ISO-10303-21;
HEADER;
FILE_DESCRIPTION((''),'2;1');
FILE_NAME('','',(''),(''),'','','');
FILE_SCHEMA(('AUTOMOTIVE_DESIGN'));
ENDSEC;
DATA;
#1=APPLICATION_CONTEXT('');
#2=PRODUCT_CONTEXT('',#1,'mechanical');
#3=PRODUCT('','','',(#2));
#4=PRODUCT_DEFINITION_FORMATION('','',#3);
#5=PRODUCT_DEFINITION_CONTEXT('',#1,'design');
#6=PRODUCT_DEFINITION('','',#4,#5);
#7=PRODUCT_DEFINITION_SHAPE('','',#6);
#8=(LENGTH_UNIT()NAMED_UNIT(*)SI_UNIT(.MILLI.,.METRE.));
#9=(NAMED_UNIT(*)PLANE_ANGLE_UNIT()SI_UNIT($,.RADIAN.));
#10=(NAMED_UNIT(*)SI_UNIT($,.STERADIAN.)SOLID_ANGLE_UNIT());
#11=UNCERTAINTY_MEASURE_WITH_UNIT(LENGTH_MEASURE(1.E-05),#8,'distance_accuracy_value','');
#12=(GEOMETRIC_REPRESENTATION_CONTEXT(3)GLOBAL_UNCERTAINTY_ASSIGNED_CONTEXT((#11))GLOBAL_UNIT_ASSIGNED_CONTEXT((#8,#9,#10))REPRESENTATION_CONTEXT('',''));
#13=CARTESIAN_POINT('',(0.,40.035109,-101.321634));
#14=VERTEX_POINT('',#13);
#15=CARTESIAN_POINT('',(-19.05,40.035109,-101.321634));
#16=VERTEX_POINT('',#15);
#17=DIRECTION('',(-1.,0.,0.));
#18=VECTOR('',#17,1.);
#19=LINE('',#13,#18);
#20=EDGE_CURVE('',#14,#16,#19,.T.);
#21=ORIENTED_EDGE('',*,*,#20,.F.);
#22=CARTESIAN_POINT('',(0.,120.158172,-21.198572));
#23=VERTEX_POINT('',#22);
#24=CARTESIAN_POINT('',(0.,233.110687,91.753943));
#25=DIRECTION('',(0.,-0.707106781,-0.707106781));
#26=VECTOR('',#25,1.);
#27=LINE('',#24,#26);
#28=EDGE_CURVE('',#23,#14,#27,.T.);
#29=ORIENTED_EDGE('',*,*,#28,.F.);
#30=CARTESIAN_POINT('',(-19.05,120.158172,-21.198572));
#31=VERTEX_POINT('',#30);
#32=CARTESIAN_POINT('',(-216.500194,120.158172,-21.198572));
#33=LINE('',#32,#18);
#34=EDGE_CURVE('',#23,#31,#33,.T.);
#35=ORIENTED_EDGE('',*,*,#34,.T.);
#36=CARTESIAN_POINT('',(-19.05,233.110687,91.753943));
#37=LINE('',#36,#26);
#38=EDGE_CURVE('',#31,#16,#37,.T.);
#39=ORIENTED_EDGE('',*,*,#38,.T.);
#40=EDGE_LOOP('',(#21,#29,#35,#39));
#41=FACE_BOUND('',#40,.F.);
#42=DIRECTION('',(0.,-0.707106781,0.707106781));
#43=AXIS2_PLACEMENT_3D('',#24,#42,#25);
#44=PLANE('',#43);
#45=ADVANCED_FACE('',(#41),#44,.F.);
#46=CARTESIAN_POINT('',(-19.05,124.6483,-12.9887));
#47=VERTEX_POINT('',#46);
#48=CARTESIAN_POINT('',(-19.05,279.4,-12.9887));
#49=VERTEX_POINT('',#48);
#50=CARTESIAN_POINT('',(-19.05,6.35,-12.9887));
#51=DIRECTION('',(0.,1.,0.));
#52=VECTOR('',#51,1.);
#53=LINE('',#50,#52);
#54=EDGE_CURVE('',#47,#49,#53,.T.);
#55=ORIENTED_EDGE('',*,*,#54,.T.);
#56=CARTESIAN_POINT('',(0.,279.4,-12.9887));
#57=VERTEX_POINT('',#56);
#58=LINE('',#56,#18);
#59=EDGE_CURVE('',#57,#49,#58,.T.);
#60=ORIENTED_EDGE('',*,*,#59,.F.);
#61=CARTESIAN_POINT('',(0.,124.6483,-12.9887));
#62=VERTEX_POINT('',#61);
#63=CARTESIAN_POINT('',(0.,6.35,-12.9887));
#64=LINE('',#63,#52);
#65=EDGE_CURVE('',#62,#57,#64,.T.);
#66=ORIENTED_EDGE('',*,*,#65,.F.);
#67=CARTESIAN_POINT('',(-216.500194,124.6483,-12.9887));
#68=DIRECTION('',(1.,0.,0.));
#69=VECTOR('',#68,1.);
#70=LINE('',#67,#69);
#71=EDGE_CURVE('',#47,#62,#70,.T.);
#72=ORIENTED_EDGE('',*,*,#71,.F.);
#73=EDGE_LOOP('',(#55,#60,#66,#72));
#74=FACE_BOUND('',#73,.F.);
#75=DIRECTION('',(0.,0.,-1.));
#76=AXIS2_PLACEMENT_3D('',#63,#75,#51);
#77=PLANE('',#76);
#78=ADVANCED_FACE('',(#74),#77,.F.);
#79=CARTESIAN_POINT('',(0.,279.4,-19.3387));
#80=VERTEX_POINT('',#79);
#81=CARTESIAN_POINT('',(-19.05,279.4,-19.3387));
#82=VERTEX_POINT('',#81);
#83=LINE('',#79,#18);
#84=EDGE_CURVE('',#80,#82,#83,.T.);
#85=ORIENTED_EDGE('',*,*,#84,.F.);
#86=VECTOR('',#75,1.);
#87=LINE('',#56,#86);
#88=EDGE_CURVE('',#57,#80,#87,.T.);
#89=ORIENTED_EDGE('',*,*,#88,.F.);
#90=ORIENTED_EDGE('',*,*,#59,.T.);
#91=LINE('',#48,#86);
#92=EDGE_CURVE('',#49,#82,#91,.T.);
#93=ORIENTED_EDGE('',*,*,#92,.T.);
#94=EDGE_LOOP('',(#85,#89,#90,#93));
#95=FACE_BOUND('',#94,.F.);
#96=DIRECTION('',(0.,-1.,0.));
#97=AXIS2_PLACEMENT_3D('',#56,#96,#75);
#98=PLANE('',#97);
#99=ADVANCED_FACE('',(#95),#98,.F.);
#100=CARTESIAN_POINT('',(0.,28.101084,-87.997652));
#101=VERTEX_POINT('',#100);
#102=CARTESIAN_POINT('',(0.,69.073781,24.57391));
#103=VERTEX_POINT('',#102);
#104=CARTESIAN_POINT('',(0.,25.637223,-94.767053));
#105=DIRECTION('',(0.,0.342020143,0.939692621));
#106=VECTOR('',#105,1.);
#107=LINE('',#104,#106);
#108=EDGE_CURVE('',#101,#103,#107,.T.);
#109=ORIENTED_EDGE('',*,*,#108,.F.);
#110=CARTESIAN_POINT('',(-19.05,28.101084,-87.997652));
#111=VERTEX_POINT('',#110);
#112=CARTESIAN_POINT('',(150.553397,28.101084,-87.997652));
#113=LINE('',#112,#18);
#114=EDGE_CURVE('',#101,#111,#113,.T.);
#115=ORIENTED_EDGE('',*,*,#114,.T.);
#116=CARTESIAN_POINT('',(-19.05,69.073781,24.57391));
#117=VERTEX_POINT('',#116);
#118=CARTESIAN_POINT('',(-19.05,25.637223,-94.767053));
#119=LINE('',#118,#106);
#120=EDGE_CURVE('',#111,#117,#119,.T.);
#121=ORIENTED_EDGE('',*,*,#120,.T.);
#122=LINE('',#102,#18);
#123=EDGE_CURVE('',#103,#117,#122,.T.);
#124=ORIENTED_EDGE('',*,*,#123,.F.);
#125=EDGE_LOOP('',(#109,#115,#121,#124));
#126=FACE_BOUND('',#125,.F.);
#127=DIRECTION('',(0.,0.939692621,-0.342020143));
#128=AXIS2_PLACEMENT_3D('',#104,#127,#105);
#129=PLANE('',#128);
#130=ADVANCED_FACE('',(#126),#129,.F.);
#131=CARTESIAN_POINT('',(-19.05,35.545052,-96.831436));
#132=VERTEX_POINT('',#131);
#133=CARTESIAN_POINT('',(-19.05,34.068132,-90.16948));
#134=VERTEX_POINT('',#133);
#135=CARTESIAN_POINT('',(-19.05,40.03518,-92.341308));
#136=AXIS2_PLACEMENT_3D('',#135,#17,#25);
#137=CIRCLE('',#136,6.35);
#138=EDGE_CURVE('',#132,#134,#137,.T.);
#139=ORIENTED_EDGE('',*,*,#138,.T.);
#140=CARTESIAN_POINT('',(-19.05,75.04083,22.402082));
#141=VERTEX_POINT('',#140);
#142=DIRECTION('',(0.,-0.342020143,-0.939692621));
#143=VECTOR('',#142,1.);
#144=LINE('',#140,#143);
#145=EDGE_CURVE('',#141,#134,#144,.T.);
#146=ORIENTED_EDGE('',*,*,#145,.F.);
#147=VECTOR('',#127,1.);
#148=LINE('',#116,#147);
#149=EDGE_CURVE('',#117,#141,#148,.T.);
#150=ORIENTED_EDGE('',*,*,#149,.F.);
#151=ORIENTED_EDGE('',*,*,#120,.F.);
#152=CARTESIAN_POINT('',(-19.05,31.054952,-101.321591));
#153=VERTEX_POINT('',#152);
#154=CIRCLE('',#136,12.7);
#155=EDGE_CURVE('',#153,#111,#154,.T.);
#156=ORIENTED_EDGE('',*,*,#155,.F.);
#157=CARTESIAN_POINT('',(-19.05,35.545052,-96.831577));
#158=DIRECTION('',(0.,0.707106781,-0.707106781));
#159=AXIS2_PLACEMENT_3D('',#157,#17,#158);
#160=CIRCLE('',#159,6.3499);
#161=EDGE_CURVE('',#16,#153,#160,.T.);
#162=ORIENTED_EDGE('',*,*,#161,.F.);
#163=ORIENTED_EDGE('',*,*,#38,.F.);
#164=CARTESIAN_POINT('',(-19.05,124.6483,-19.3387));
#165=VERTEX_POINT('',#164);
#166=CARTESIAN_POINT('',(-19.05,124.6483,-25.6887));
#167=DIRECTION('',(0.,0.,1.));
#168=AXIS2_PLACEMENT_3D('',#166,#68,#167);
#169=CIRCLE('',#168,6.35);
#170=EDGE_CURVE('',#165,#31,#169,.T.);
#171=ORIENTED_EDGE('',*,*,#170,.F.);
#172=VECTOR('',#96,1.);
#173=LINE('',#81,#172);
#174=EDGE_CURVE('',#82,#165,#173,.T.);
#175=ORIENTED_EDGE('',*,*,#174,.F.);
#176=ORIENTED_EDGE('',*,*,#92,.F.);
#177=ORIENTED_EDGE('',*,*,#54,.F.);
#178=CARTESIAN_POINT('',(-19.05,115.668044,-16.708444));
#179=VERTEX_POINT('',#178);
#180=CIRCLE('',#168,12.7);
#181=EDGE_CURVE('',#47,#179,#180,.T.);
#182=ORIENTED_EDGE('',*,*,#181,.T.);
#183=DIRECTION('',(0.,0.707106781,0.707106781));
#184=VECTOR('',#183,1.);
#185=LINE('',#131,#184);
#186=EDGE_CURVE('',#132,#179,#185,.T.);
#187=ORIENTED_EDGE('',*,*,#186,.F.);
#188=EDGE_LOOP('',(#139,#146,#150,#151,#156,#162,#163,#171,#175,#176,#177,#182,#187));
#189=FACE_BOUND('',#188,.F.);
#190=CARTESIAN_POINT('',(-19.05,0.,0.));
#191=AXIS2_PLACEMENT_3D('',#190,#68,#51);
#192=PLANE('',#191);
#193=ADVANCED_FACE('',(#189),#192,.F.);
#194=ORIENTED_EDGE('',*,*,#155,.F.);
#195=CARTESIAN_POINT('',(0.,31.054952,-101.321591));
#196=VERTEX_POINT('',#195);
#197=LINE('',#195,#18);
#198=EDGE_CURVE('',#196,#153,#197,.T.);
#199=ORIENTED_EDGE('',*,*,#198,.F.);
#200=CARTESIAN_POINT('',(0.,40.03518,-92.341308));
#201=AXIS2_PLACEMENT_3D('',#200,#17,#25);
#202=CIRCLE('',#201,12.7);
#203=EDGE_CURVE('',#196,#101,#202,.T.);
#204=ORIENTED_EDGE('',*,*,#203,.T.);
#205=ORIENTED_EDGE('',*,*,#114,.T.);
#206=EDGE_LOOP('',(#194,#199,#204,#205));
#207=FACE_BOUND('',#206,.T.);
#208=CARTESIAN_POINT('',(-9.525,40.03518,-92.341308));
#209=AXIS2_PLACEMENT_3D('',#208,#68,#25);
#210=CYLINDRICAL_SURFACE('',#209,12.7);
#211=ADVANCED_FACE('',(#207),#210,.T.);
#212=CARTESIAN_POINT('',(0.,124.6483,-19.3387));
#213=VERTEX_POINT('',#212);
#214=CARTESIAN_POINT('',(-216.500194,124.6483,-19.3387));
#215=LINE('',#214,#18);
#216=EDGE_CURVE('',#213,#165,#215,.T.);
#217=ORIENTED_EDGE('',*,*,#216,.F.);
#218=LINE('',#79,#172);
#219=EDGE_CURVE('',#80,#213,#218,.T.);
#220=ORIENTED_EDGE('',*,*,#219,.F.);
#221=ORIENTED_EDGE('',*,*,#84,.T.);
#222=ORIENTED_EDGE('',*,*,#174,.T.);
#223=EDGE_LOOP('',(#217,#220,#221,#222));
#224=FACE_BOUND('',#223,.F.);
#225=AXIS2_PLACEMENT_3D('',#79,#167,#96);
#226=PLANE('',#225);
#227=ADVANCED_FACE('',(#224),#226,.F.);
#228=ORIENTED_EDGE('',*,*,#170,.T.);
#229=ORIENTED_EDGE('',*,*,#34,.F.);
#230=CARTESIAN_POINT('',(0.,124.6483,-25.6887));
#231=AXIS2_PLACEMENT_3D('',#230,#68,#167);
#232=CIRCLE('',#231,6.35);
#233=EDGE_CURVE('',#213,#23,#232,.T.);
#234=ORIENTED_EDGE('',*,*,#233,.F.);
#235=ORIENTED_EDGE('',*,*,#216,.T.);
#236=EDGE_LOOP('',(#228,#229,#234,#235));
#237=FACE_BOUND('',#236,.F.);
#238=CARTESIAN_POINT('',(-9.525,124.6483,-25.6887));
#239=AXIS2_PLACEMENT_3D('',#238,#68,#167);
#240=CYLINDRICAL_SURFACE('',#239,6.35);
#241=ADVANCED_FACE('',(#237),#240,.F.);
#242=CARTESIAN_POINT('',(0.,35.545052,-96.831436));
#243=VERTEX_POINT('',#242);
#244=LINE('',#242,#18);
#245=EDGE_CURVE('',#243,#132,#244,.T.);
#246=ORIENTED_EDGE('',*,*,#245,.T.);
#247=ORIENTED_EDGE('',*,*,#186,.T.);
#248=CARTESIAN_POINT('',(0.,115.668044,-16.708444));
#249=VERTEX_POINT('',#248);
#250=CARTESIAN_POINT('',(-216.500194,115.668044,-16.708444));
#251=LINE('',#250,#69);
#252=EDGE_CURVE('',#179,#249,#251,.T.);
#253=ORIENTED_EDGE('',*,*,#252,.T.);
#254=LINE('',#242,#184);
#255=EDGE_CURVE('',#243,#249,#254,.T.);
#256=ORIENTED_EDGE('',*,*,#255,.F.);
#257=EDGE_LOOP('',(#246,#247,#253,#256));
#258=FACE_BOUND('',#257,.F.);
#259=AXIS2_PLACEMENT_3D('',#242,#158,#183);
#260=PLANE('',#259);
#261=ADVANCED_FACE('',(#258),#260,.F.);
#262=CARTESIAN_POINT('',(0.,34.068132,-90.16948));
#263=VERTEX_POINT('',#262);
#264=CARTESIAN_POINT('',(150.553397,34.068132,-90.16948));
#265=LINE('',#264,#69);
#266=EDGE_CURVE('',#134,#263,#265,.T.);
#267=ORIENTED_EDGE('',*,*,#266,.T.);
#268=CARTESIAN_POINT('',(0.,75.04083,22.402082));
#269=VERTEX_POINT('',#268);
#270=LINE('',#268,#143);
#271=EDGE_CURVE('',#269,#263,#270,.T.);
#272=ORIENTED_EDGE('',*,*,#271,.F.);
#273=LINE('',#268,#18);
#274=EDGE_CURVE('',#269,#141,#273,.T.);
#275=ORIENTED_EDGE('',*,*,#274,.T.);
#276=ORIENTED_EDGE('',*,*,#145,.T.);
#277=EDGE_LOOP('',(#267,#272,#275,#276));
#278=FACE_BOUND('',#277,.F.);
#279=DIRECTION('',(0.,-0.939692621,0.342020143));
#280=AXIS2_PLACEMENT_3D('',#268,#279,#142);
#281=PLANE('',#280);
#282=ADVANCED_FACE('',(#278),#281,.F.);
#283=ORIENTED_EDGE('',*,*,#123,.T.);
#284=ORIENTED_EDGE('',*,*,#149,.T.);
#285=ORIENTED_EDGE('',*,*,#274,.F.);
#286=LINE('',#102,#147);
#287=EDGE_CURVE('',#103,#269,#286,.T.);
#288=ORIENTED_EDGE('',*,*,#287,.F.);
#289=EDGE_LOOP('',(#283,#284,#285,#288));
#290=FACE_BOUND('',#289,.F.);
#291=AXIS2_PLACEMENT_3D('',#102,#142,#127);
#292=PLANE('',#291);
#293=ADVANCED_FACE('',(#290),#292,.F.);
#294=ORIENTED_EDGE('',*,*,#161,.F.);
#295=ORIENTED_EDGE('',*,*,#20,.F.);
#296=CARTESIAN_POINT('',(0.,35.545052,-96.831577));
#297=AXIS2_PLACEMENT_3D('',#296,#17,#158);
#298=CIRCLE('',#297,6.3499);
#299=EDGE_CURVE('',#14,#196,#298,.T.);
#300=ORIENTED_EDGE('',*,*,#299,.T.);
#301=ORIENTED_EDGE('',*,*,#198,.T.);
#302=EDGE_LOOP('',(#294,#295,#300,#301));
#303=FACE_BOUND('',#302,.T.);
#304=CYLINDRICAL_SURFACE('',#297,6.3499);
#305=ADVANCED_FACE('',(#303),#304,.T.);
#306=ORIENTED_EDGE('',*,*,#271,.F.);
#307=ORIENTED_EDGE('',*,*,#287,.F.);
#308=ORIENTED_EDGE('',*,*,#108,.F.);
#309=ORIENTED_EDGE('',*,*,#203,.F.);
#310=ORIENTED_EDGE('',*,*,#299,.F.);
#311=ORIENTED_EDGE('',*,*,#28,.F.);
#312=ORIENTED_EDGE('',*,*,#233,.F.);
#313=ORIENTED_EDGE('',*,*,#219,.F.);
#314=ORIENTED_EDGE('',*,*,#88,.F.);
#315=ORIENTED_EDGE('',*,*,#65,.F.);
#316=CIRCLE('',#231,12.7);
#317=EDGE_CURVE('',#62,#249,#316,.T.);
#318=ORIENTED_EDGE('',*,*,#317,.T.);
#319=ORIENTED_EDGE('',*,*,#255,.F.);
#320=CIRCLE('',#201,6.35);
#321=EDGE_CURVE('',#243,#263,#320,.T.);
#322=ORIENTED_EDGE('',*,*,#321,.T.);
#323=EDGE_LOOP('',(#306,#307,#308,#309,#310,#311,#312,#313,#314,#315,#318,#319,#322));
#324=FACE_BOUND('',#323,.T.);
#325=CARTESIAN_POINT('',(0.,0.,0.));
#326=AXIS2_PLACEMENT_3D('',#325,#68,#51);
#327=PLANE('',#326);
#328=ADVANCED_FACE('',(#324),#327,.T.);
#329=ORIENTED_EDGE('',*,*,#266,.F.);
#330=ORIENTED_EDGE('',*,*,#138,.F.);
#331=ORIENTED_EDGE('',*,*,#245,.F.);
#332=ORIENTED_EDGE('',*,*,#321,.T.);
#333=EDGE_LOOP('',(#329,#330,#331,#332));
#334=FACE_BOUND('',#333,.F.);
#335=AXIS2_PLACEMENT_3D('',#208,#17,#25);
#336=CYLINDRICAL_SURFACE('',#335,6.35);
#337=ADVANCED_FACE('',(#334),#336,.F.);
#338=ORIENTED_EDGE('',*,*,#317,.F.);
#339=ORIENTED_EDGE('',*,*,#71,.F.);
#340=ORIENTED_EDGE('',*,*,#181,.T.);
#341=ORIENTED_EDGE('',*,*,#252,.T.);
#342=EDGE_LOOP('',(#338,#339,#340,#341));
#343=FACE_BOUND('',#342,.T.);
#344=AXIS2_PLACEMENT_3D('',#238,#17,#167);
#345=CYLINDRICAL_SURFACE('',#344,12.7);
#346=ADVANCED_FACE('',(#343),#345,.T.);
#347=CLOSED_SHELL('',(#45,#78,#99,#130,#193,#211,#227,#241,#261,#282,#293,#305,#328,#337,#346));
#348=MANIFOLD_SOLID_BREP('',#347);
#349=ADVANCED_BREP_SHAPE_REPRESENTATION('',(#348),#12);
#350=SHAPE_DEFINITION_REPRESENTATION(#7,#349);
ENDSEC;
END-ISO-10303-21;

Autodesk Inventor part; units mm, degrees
ref_plane "YZ Plane" through (0, 0, 0) normal (1, 0, 0) x (0, 1, 0)
ref_plane "XZ Plane" through (0, 0, 0) normal (0, 1, 0) x (-1, 0, 0)
ref_plane "XY Plane" through (0, 0, 0) normal (0, 0, 1) x (1, 0, 0)
sketch "Sketch1" plane through (0, 0, 0) normal (1, 0, 0) x (0, 1, 0)
  line L0 (6.35, -12.9887) -> (279.4, -12.9887)
  line L1 (279.4, -12.9887) -> (279.4, -19.3387)
  line L2 (279.4, -19.3387) -> (0, -19.3387)
  line L3 (0, -19.3387) -> (0, -12.9887)
  line L4 (0, -12.9887) -> (0, 114.0113)
  line L5 (0, 114.0113) -> (6.35, 114.0113)
  line L6 (6.35, 114.0113) -> (6.35, -12.9887)
  point P0 (0, 0)
  dimension "d0" = 279.4
  dimension "d1" = 6.35
  dimension "d2" = 127
  dimension "d3" = 6.35
extrude "Extrusion1" add sketch "Sketch1" against normal blind 19.05
sketch "Sketch2" plane through (0, 6.35, 114.0113) normal (0, 1, 0) x (1, 0, 0)
  line L0 (0, 127) -> (-19.05, 127) projected
  line L1 (-19.05, 127) -> (0, 127)
  line L2 (0, 0) -> (0, 133.35) projected
  point P0 (0, 114.0113)
fillet "Fillet1" radius 6.35 1 edges at (-9.525, 0, -19.3387)
bend part "Bend Part1" radius 6.35 angle 65 line through (-19.05, 6.35, -12.9887) along (1, 0, 0) centre toward (0, 1, 0) moving side (0, 0, 1) both sides no
sketch "Sketch3" plane through (0, 6.35, -19.3387) normal (0, 0, -1) x (-1, 0, 0)
  line L0 (39.6982, 130.9983) -> (-135.4768, 130.9983) projected
  line L1 (19.05, 118.2983) -> (0, 118.2983)
  point P0 (0, -6.35)
bend part "Bend Part2" radius 6.35 angle 45 line through (-19.05, 124.6483, -19.3387) along (1, 0, 0) centre toward (0, 0, -1) moving side (0, -1, 0) both sides no
properties part number "Plexi hooks"
